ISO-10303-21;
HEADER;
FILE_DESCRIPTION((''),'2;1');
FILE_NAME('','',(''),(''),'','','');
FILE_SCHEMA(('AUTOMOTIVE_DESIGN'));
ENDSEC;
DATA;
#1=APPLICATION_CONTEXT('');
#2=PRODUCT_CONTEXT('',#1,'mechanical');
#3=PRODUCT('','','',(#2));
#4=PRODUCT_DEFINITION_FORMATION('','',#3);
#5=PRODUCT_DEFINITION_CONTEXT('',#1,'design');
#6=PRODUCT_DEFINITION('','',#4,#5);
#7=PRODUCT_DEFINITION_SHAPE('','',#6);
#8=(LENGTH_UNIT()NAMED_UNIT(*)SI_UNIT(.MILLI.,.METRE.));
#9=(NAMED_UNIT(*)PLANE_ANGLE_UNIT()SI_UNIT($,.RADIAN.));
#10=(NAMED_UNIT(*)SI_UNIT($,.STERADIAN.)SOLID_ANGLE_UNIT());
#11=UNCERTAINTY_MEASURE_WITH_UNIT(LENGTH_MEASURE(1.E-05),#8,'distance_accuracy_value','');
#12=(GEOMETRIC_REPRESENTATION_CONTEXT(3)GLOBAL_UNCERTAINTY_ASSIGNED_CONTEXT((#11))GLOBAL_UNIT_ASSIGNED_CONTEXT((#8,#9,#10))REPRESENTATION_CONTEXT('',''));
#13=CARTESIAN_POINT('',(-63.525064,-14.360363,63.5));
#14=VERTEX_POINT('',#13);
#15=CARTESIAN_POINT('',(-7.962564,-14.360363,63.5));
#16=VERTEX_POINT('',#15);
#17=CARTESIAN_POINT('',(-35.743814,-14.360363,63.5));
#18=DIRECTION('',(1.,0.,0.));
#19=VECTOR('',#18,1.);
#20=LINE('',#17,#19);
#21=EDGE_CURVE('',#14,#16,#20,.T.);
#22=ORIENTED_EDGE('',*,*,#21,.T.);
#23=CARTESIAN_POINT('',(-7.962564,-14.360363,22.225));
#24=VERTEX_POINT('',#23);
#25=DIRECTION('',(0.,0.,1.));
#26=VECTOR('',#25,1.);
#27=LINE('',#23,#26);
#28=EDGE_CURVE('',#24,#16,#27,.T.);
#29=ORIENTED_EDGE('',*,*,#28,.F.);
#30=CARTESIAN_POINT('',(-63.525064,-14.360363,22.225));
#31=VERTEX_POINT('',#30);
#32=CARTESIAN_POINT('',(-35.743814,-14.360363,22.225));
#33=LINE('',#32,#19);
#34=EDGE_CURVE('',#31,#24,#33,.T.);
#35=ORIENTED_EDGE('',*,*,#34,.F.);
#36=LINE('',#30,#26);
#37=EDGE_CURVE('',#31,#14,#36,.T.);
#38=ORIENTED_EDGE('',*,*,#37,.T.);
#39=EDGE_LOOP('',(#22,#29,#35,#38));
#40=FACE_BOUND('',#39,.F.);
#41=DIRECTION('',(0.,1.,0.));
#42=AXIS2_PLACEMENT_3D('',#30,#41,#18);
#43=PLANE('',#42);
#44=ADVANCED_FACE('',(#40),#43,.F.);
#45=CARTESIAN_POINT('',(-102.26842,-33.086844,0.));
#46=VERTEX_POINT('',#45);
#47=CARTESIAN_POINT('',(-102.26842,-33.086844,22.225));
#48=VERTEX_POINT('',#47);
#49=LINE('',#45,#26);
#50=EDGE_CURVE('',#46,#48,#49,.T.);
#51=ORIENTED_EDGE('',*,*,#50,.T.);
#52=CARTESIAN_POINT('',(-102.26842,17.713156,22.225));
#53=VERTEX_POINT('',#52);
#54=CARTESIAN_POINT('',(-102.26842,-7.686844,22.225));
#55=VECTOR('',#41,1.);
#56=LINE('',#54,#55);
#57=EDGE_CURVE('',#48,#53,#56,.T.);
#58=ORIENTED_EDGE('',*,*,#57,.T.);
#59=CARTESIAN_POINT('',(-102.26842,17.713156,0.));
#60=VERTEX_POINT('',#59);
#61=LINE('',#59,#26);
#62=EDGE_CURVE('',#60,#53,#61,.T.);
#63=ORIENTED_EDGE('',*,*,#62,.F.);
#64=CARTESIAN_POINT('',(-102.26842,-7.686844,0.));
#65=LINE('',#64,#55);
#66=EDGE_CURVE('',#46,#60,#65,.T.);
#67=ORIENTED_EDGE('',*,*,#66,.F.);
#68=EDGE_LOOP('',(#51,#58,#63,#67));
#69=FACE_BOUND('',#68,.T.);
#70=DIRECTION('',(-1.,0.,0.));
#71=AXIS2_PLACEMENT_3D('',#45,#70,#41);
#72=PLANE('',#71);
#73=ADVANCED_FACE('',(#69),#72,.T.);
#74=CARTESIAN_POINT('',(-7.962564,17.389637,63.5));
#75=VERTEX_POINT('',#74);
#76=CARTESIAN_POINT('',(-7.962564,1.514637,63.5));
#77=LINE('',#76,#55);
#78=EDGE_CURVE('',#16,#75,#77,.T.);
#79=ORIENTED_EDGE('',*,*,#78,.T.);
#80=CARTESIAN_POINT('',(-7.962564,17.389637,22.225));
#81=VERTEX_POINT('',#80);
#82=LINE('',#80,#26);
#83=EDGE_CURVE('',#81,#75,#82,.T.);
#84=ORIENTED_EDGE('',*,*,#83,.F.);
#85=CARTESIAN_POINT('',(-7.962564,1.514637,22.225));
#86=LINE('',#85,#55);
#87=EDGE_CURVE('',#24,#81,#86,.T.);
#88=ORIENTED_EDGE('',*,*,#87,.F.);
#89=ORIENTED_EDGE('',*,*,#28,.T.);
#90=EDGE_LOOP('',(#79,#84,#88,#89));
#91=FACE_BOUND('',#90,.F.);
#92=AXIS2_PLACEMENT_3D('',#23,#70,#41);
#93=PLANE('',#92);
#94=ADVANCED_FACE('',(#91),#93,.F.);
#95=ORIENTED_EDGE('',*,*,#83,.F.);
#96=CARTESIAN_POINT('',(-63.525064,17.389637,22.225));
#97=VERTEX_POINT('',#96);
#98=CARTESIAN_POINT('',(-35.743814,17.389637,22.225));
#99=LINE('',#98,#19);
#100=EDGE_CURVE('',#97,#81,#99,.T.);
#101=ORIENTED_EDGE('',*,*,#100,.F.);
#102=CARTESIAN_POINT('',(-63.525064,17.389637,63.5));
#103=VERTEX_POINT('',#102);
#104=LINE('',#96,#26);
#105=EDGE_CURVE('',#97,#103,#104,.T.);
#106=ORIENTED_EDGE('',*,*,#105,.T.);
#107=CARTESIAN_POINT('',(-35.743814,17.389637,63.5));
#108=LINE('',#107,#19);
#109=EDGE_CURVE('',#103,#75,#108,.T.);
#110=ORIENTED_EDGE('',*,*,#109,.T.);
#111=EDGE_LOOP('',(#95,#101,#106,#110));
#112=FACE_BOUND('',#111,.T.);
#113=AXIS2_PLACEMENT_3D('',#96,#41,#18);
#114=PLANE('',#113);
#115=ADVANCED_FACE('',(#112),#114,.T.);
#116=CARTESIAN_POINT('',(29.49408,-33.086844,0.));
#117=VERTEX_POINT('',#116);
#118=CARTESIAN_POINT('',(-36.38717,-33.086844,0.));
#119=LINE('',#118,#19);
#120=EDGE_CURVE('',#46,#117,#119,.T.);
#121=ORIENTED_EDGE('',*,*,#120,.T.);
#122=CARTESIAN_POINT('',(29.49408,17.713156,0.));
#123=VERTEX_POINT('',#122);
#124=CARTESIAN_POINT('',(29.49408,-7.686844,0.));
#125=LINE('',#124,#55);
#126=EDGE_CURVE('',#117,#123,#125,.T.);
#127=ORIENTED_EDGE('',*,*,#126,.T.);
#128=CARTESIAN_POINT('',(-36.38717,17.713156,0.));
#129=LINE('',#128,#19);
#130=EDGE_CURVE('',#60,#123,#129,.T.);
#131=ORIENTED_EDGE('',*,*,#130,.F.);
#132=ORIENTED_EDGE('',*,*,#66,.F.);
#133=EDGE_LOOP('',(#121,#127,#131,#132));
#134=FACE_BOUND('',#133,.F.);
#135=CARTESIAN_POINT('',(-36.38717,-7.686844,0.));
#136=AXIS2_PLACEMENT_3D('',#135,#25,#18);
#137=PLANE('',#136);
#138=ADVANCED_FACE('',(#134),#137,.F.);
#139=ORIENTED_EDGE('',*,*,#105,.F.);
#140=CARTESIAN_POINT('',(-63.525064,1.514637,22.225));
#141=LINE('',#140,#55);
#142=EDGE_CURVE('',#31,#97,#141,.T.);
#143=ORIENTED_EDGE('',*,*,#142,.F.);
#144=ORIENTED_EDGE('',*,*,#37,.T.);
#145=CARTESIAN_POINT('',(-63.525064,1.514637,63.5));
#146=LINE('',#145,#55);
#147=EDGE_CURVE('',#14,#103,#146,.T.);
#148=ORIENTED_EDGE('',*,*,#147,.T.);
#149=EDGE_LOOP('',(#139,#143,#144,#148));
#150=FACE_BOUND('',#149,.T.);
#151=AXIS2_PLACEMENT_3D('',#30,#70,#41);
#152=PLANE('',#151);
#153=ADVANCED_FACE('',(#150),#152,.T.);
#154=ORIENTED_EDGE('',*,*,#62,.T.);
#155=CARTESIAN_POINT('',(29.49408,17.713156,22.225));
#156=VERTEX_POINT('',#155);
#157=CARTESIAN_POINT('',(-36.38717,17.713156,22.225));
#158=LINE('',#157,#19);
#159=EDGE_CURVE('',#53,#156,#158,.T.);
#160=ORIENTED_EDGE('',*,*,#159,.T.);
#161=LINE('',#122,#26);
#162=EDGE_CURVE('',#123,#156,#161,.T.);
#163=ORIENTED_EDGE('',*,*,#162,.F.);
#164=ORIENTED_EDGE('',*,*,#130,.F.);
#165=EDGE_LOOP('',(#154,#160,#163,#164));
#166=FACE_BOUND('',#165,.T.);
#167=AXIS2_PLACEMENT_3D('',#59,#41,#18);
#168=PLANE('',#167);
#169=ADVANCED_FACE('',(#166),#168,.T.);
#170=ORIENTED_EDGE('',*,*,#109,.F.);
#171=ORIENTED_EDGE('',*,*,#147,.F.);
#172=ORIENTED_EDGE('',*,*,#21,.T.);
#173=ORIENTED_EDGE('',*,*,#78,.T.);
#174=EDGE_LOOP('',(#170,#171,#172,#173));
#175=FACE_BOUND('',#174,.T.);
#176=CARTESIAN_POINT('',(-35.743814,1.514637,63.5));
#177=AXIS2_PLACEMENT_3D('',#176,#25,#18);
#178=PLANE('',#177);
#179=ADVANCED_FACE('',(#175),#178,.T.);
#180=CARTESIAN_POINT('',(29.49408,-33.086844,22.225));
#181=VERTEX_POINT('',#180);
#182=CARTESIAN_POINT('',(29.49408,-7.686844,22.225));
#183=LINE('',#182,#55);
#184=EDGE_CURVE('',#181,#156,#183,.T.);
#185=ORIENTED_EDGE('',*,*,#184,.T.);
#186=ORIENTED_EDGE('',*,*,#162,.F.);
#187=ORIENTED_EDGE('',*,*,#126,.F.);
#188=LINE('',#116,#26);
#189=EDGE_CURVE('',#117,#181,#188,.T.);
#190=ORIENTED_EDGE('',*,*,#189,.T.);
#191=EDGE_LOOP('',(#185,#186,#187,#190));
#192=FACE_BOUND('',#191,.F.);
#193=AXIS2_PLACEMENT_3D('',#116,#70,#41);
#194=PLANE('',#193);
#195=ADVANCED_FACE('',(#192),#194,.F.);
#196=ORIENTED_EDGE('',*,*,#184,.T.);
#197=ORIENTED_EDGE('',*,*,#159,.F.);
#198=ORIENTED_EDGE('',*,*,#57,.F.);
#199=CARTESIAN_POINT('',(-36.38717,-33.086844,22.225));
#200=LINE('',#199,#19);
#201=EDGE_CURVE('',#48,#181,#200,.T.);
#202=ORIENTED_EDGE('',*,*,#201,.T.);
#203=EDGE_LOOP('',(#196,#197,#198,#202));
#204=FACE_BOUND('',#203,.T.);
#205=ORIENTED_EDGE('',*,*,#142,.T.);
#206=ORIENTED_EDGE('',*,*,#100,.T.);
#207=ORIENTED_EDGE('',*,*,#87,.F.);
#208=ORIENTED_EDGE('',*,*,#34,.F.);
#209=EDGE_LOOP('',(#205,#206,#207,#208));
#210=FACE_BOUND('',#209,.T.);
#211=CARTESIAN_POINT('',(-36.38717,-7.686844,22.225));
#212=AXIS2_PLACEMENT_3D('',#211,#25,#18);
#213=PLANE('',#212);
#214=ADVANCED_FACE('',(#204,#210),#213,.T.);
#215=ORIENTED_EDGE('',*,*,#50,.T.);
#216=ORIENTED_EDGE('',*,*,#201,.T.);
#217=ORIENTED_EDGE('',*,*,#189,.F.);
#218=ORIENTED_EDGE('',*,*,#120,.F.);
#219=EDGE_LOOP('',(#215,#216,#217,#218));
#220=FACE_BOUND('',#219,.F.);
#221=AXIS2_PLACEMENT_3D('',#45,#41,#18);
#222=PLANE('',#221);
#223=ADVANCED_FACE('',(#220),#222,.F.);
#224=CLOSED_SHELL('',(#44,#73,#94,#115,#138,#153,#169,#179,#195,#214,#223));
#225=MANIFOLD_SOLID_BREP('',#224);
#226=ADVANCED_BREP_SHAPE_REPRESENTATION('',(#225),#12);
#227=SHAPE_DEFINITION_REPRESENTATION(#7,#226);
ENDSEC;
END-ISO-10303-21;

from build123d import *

# Parameters (mm, degrees)
F0_W     = 131.7625
F0_H     = 50.8
F1_DEPTH = 22.225
F3_W     = 55.5625
F3_H     = 31.75
F4_DEPTH = 41.275


# Not quite as in the source:
# - a length typed as a fraction of an inch, garbled in the dataset ("3 / 203.2 mm" for 3/8 in), is restored


with BuildPart() as f1:
    # F0 (on Top) → F1 (new body)
    with BuildSketch(Plane.XY):
        with Locations((-36.3871701598, -7.6868437886)):
            Rectangle(F0_W, F0_H)
    extrude(amount=F1_DEPTH)

    # F3 (on face) → F4 (join)
    with BuildSketch(Plane.XY.offset(22.225)):
        with Locations((-35.7438139617, 1.5146372089)):
            Rectangle(F3_W, F3_H)
    extrude(amount=F4_DEPTH)


solid = f1.part
